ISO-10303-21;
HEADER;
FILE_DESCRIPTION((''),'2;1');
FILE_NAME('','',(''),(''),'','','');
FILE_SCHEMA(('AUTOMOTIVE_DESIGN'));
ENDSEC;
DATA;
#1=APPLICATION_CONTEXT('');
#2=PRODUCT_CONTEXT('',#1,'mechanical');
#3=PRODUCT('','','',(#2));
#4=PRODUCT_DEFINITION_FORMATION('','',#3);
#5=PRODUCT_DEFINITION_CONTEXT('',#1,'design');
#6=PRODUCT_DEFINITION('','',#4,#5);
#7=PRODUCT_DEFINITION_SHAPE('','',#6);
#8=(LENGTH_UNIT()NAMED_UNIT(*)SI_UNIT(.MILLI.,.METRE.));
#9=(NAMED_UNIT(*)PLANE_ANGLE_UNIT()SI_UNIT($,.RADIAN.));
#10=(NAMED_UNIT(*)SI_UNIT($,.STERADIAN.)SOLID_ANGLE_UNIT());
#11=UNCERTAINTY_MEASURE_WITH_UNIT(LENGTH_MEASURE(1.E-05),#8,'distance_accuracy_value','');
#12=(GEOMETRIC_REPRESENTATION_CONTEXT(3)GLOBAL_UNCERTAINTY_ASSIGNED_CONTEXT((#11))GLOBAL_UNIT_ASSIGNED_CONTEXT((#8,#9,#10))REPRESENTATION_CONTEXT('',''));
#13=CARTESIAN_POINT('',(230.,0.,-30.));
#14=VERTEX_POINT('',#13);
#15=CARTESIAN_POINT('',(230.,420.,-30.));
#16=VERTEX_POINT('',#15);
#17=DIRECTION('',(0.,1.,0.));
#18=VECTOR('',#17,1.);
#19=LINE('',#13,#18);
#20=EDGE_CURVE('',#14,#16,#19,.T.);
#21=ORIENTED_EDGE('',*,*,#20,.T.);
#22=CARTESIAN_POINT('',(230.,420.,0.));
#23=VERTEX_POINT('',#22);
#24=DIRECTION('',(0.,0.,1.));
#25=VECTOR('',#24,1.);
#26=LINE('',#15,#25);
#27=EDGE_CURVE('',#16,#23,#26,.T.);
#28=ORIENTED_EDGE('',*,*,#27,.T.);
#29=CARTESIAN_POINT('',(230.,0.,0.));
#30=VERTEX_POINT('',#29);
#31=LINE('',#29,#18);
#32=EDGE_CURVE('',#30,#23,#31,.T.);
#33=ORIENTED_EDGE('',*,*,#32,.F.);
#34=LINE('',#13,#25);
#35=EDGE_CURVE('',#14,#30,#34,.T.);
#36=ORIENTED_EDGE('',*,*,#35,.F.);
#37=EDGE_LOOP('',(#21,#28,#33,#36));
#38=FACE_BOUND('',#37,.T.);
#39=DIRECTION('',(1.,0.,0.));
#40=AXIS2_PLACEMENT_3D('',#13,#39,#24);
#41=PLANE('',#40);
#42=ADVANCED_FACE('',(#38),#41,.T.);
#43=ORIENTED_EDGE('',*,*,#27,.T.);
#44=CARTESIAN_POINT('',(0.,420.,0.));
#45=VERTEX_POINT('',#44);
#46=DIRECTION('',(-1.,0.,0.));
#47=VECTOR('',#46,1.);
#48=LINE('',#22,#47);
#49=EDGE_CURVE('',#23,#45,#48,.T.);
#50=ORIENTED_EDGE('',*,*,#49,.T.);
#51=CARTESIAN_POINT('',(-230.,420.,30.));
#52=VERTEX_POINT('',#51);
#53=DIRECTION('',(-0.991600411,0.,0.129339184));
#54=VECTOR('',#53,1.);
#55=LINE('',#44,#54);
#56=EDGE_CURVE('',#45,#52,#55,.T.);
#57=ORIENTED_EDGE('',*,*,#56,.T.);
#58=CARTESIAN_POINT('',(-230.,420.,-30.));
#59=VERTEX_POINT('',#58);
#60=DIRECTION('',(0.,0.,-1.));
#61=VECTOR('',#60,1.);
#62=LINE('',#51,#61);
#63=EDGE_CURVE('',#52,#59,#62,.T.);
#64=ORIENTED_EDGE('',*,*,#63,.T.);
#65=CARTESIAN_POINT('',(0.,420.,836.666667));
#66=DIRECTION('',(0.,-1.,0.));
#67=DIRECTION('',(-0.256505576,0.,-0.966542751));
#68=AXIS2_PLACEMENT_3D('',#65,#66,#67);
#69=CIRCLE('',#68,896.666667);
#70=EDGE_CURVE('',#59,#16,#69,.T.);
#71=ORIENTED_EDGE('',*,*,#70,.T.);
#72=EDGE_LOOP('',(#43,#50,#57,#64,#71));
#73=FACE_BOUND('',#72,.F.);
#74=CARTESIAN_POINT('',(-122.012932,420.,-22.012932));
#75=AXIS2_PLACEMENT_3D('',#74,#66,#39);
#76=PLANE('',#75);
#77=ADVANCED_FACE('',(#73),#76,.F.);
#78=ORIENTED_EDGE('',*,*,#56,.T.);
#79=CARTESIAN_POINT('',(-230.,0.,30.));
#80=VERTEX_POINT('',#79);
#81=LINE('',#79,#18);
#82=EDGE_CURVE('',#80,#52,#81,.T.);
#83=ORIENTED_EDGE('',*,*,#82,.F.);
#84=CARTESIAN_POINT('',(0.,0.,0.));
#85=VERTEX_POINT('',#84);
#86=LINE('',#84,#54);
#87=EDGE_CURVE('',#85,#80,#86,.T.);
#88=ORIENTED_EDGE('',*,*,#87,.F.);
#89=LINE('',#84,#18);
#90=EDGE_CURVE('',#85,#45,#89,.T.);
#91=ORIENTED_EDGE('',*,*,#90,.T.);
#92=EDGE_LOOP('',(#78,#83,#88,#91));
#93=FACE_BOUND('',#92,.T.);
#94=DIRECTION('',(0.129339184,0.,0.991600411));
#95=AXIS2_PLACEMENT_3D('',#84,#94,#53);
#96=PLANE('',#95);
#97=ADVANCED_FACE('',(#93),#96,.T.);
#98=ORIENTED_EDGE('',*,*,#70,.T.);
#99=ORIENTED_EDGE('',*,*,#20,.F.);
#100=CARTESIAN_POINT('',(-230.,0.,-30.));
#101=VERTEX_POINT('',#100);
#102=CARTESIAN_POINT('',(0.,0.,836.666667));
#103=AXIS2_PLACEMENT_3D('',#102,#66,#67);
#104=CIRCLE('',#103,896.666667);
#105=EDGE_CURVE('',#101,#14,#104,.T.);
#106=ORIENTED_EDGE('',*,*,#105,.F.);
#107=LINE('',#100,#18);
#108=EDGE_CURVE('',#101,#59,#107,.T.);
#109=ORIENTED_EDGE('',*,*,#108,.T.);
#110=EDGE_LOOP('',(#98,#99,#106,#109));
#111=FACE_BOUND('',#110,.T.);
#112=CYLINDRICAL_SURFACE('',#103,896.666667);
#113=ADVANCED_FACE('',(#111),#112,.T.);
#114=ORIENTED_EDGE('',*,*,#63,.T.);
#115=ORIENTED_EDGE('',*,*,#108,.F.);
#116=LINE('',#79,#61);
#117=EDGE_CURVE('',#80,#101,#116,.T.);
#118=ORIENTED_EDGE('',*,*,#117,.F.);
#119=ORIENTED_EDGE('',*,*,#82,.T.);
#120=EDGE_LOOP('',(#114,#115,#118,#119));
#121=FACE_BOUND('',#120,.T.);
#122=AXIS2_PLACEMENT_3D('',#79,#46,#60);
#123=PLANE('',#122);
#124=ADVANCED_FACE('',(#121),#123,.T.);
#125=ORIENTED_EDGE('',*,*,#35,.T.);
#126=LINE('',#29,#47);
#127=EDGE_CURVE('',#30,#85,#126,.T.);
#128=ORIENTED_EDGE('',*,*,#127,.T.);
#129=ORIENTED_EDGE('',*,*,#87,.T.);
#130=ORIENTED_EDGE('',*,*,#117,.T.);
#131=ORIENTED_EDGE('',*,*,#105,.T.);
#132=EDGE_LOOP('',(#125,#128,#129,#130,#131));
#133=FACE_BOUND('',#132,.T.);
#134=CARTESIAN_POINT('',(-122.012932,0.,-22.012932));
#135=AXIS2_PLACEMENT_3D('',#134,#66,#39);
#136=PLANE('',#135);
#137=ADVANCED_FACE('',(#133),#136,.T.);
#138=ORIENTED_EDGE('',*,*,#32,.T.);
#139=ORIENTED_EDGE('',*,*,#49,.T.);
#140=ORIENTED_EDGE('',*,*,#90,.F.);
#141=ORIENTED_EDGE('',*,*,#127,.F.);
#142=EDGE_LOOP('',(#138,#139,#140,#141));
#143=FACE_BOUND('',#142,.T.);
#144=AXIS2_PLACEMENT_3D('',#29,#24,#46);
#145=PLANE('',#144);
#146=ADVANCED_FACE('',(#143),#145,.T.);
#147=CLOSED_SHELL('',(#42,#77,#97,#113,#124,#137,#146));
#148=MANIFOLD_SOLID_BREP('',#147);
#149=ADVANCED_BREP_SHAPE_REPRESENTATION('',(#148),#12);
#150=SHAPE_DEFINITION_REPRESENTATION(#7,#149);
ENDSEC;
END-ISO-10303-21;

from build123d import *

# Parameters (mm, degrees)
F1_DEPTH = 420


# Not quite as in the source:
# - a feature names something its author has since deleted; it is built from what else it names


with BuildPart() as f1:
    # F0 (on Front) → F1 (new body)
    with BuildSketch(Plane.XZ):
        Polygon((-230, -30), (0, -30), (-230, 0), align=None)
        Polygon((0, -30), (230, -30), (230, 0), (0, 0), (-230, 30), (-230, 0), align=None)
        with BuildLine():
            ThreePointArc((-230, -30), (0, -60), (230, -30))
            Line((230, -30), (0, -30))
            Line((0, -30), (-230, -30))
        make_face()
    extrude(amount=-F1_DEPTH)


solid = f1.part
